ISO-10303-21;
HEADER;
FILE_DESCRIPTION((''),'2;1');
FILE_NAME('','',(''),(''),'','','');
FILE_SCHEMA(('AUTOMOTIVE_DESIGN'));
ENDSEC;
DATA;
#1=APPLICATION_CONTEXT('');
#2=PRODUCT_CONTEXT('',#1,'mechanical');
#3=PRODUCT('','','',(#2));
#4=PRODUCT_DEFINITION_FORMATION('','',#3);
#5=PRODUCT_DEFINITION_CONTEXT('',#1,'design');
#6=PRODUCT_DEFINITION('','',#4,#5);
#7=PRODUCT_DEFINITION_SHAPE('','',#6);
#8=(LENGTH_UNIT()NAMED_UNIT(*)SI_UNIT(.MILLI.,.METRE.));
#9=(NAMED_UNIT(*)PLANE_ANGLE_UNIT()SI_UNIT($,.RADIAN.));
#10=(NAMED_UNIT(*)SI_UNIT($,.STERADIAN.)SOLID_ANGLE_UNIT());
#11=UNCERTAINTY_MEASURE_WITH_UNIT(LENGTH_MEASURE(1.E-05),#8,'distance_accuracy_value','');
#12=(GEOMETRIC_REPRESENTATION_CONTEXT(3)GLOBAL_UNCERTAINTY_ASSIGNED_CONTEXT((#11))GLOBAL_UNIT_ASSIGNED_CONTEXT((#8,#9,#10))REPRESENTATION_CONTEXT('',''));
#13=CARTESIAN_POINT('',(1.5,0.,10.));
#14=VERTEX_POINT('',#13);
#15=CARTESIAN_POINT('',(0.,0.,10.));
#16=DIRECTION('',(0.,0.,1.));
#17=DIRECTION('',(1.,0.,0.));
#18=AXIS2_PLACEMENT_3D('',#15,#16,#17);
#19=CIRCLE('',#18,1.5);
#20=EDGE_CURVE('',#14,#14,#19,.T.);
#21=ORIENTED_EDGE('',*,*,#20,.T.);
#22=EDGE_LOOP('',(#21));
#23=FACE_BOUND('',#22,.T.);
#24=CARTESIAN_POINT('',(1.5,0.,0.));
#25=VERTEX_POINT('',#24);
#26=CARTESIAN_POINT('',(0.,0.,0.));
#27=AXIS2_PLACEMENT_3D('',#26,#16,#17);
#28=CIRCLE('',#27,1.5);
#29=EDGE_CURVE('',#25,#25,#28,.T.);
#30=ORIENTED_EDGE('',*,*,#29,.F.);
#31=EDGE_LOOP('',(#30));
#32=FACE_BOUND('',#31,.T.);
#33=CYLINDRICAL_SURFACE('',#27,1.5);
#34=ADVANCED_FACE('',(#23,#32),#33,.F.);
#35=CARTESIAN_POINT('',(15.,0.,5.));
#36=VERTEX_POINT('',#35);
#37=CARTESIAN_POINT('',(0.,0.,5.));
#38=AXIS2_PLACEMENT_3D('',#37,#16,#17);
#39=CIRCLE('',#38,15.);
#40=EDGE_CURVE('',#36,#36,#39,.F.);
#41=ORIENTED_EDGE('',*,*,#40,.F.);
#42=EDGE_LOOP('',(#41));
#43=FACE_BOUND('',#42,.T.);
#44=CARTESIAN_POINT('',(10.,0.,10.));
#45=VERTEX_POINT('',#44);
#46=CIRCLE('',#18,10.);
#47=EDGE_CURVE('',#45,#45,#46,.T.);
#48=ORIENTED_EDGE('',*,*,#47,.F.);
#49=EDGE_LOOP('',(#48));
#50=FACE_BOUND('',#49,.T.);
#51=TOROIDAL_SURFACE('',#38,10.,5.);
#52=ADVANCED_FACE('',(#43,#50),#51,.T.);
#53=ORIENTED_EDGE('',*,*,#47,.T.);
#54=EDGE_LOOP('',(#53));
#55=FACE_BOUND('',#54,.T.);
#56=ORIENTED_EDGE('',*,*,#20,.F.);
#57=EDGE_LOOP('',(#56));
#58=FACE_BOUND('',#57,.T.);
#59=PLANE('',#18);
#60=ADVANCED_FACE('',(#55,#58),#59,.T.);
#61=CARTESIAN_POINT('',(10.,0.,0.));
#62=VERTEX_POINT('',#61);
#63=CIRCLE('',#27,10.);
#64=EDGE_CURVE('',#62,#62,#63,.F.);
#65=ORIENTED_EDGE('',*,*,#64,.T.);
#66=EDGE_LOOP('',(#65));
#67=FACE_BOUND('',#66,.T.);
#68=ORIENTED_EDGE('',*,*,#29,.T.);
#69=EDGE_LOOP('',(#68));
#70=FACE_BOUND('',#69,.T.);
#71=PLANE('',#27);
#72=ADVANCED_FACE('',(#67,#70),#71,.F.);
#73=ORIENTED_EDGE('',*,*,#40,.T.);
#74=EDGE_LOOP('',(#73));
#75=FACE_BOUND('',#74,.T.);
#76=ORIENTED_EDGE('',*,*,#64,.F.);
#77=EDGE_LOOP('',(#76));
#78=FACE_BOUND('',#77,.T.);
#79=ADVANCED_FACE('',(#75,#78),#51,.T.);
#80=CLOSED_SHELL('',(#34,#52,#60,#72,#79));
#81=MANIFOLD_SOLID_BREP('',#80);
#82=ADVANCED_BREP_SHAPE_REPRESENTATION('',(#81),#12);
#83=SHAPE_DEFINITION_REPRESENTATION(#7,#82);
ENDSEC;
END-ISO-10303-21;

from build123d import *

# Parameters (mm, degrees)
SKETCH1_R           = 15
BOSS_EXTRUDE1_DEPTH = 10
FILLET1_R           = 5
FILLET2_R           = 5
SKETCH2_R           = 1.5
CUT_EXTRUDE1_DEPTH  = 24.452078799


with BuildPart() as part:
    # Sketch1 → Boss-Extrude1 (new body)
    with BuildSketch(Plane.XY):
        Circle(SKETCH1_R)
    extrude(amount=BOSS_EXTRUDE1_DEPTH)

    # Fillet1
    fillet1_edges = [part.edges().sort_by_distance(p)[0] for p in [
        (-15, 0, 10),
    ]]
    fillet(fillet1_edges, radius=FILLET1_R)

    # Fillet2
    fillet2_edges = [part.edges().sort_by_distance(p)[0] for p in [
        (-15, 0, 0),
    ]]
    fillet(fillet2_edges, radius=FILLET2_R - 0.0001)  # a hair under: the kernel refuses the full size

    # Sketch2 → Cut-Extrude1 (cut, through all)
    with BuildSketch(Plane.XY.offset(10)):
        Circle(SKETCH2_R)
    extrude(amount=-CUT_EXTRUDE1_DEPTH, mode=Mode.SUBTRACT)


solid = part.part
